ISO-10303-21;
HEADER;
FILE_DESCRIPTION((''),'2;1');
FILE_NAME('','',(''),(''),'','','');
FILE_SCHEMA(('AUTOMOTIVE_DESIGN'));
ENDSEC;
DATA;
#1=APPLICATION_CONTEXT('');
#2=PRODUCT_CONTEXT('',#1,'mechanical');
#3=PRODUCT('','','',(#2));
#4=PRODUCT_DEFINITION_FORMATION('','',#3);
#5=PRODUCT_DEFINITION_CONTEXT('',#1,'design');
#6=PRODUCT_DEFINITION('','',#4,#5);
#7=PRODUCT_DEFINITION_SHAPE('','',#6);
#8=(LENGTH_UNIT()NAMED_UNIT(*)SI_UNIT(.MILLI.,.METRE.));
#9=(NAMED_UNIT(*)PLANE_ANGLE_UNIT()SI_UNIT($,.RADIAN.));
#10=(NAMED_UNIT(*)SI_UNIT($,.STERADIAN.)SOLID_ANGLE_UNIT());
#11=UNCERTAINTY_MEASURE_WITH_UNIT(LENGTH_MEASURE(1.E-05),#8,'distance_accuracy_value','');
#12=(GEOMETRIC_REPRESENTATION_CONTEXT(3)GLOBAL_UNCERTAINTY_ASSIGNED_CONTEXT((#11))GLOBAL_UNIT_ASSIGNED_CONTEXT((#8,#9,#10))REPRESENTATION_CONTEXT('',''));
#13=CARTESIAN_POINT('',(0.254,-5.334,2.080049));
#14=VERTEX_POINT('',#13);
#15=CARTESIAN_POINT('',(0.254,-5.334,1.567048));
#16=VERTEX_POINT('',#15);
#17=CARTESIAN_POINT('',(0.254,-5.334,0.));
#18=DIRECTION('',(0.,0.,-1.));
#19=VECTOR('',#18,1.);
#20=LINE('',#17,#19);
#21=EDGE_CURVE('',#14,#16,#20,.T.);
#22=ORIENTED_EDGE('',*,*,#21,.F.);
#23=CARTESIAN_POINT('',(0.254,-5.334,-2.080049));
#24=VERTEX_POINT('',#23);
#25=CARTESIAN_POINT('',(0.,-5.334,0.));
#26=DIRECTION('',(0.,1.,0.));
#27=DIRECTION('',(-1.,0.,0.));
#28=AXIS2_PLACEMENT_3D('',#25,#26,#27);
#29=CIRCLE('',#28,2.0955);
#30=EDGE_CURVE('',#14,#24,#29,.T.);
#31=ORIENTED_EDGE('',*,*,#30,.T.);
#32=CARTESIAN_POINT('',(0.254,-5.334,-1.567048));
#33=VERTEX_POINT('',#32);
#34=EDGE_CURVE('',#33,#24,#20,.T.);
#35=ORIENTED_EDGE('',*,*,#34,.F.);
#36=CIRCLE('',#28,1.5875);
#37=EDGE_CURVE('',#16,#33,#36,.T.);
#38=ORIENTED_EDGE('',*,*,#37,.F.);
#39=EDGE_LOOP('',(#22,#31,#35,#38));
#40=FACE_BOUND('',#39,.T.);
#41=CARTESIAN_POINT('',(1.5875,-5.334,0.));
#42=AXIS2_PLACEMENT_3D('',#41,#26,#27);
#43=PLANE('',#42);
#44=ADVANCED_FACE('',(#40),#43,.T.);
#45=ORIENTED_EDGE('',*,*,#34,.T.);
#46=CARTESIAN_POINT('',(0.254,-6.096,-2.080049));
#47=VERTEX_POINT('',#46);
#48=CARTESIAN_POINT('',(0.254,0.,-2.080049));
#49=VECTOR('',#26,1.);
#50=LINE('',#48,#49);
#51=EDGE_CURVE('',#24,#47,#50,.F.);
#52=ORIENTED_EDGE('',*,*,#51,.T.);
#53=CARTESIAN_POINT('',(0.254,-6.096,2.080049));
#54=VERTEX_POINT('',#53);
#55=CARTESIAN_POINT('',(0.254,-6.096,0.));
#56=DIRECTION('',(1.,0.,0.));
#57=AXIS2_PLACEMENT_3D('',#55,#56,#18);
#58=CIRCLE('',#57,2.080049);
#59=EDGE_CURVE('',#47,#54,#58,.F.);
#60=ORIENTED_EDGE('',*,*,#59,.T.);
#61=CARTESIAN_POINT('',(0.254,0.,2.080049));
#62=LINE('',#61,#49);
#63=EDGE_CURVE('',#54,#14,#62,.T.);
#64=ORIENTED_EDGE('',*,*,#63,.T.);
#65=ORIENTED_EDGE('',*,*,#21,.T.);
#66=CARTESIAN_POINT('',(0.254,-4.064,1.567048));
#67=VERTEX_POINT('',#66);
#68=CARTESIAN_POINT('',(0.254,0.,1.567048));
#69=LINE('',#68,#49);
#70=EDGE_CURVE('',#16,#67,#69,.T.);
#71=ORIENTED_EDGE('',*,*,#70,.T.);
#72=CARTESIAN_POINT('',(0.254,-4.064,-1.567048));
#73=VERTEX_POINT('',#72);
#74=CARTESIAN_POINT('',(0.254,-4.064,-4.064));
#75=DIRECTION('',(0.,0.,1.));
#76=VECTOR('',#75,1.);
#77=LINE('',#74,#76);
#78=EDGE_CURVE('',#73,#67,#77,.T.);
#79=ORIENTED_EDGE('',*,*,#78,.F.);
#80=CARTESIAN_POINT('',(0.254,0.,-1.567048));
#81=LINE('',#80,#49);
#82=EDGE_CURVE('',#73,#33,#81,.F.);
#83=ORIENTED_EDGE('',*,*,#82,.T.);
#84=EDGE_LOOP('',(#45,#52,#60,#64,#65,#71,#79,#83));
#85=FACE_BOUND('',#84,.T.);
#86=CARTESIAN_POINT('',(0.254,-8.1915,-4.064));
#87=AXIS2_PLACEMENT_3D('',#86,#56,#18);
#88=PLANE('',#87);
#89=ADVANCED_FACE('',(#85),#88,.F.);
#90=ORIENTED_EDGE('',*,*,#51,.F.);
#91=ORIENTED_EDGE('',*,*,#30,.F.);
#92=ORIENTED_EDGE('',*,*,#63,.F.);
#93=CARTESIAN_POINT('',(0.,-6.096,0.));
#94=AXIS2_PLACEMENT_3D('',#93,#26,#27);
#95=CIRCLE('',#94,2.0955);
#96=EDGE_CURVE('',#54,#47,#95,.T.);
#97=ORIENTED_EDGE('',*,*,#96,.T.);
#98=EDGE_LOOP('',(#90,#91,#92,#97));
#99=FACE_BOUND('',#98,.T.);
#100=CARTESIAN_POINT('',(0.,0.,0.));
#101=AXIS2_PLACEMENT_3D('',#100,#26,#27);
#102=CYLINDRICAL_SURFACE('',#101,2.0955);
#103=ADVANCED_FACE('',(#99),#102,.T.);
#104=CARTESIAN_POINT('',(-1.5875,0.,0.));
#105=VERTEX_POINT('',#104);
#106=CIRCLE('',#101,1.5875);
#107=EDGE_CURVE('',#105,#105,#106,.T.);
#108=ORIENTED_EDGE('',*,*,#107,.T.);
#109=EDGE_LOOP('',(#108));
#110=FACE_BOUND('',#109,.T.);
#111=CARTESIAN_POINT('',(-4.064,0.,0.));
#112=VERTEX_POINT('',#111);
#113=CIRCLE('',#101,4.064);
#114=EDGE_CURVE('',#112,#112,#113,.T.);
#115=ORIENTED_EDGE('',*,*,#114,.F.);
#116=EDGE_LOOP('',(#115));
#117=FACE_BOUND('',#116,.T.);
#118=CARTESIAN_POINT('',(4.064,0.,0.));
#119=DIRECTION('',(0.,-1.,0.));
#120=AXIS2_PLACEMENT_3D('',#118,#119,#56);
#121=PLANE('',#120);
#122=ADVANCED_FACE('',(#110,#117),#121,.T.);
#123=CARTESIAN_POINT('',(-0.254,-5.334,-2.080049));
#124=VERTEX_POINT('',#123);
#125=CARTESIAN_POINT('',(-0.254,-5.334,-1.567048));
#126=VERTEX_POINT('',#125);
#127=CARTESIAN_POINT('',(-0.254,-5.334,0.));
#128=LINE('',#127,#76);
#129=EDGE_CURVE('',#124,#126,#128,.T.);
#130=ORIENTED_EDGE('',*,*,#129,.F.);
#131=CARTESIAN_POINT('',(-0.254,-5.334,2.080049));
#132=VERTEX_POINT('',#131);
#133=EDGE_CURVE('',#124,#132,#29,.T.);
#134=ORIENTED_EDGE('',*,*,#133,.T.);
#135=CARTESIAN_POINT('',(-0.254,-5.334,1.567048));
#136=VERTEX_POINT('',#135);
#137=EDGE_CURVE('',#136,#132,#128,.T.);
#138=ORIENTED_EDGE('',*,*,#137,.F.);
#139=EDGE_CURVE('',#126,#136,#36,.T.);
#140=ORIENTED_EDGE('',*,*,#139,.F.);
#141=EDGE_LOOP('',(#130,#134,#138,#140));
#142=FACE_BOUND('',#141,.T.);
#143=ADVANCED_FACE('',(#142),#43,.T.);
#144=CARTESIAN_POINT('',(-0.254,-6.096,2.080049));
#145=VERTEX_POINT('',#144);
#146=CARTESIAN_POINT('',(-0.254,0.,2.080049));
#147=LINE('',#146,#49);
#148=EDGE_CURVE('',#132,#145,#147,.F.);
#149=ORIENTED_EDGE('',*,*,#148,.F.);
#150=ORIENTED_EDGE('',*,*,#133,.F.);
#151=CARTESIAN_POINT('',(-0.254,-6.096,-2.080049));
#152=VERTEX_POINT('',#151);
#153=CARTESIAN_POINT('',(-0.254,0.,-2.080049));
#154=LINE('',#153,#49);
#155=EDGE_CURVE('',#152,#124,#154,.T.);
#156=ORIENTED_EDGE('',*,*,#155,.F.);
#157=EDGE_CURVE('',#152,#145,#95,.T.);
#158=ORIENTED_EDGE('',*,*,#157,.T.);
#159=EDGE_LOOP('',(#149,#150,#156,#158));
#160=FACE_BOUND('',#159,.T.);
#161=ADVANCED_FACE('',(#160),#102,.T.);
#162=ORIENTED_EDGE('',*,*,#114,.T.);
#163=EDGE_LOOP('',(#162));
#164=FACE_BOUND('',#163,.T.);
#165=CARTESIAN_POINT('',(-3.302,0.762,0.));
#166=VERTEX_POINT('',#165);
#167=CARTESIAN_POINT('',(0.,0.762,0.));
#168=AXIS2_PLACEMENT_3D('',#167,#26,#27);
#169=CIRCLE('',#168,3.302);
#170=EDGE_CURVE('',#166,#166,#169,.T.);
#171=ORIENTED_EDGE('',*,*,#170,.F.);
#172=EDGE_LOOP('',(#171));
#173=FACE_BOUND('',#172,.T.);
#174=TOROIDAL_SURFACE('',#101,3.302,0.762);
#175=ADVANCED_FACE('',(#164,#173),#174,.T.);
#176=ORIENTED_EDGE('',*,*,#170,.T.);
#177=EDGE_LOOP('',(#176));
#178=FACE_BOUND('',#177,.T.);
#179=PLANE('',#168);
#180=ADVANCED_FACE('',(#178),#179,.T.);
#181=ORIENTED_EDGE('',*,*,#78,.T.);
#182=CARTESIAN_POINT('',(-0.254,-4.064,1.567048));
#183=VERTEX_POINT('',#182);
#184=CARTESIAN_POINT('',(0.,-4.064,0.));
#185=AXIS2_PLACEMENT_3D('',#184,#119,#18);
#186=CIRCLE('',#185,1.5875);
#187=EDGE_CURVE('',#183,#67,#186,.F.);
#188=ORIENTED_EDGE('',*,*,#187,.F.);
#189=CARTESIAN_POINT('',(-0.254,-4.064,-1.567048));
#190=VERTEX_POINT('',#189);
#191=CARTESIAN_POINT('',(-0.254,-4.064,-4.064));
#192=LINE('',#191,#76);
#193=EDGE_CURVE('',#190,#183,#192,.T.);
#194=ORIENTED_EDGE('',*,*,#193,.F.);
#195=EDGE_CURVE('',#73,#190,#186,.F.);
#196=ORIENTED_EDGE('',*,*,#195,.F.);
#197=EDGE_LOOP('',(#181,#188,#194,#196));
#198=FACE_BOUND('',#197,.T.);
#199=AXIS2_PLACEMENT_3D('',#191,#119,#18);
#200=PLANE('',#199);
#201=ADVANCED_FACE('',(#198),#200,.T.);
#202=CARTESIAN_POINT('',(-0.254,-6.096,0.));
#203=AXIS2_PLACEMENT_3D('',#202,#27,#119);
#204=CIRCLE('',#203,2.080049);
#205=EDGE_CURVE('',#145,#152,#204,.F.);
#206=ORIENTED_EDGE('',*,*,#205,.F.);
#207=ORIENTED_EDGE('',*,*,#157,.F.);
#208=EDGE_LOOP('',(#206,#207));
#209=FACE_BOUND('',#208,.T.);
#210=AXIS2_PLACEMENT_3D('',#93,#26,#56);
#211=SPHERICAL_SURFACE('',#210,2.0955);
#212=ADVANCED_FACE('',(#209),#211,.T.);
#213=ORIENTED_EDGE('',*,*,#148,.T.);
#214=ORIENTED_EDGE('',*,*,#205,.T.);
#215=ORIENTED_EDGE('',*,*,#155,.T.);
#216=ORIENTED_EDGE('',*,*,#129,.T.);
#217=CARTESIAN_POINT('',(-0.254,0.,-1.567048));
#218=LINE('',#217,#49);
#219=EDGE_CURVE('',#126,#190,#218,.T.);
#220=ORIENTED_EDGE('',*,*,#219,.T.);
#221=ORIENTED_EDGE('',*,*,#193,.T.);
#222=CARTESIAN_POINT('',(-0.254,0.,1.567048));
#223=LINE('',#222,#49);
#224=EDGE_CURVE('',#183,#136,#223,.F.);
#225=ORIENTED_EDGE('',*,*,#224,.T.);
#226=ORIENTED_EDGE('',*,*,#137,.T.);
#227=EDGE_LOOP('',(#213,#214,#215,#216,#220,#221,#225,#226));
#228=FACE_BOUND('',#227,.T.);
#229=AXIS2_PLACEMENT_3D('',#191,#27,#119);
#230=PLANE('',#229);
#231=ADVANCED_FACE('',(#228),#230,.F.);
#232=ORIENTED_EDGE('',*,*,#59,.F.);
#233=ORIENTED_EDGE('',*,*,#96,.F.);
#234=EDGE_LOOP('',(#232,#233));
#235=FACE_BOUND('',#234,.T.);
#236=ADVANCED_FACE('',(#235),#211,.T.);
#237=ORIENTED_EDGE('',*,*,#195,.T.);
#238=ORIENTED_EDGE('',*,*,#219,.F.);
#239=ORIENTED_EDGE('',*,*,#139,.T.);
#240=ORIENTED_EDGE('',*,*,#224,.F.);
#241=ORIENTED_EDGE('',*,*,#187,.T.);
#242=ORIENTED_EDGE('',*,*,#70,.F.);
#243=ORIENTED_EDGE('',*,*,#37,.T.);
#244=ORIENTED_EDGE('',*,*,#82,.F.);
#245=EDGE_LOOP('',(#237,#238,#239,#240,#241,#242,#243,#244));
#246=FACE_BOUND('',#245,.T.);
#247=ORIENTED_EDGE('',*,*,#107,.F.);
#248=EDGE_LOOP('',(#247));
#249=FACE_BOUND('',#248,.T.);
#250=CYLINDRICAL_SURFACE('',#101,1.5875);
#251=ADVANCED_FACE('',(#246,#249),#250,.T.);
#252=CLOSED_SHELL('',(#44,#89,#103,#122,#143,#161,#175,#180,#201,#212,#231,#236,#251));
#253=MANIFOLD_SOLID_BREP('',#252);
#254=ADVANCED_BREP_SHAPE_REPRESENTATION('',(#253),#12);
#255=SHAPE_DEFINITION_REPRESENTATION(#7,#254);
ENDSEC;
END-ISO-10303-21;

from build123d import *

# Parameters (mm, degrees)
FILLET1_R       = 0.762
SLOT_DEPTH      = 11.006641007
SLOT_DEPTH_BACK = 11.006641007
SKETCH2_W       = 0.508
SKETCH2_H       = 4.1275


with BuildPart() as part:
    # Sketch1 → Base-Revolve (revolve)
    with BuildSketch(Plane.XY, mode=Mode.PRIVATE) as base_revolve_sk:
        with BuildLine():
            Line((0, 0.762), (4.064, 0.762))
            Line((4.064, 0.762), (4.064, 0))
            Line((4.064, 0), (1.5875, 0))
            Line((1.5875, 0), (1.5875, -5.334))
            Line((1.5875, -5.334), (2.0955, -5.334))
            Line((2.0955, -5.334), (2.0955, -6.096))
            ThreePointArc((2.0955, -6.096), (1.48174226, -7.57774226), (0, -8.1915))
            Line((0, -8.1915), (0, 0.762))
        make_face()
    revolve(base_revolve_sk.sketch.rotate(Axis((0, 0, 0), (0, -1, 0)), 180), axis=Axis((0, 0, 0), (0, -1, 0)))

    # Fillet1
    fillet1_edges = [part.edges().sort_by_distance(p)[0] for p in [
        (4.064, 0.762, 0),
    ]]
    fillet(fillet1_edges, radius=FILLET1_R - 0.0001)  # a hair under: the kernel refuses the full size

    # Sketch2 → Slot (cut, two sides: drawn at the far end of the back side and taken through both)
    with BuildSketch(Plane.XY.offset(-SLOT_DEPTH_BACK)):
        with Locations((0, -6.12775)):
            Rectangle(SKETCH2_W, SKETCH2_H)
    extrude(amount=SLOT_DEPTH + SLOT_DEPTH_BACK, mode=Mode.SUBTRACT)


solid = part.part
